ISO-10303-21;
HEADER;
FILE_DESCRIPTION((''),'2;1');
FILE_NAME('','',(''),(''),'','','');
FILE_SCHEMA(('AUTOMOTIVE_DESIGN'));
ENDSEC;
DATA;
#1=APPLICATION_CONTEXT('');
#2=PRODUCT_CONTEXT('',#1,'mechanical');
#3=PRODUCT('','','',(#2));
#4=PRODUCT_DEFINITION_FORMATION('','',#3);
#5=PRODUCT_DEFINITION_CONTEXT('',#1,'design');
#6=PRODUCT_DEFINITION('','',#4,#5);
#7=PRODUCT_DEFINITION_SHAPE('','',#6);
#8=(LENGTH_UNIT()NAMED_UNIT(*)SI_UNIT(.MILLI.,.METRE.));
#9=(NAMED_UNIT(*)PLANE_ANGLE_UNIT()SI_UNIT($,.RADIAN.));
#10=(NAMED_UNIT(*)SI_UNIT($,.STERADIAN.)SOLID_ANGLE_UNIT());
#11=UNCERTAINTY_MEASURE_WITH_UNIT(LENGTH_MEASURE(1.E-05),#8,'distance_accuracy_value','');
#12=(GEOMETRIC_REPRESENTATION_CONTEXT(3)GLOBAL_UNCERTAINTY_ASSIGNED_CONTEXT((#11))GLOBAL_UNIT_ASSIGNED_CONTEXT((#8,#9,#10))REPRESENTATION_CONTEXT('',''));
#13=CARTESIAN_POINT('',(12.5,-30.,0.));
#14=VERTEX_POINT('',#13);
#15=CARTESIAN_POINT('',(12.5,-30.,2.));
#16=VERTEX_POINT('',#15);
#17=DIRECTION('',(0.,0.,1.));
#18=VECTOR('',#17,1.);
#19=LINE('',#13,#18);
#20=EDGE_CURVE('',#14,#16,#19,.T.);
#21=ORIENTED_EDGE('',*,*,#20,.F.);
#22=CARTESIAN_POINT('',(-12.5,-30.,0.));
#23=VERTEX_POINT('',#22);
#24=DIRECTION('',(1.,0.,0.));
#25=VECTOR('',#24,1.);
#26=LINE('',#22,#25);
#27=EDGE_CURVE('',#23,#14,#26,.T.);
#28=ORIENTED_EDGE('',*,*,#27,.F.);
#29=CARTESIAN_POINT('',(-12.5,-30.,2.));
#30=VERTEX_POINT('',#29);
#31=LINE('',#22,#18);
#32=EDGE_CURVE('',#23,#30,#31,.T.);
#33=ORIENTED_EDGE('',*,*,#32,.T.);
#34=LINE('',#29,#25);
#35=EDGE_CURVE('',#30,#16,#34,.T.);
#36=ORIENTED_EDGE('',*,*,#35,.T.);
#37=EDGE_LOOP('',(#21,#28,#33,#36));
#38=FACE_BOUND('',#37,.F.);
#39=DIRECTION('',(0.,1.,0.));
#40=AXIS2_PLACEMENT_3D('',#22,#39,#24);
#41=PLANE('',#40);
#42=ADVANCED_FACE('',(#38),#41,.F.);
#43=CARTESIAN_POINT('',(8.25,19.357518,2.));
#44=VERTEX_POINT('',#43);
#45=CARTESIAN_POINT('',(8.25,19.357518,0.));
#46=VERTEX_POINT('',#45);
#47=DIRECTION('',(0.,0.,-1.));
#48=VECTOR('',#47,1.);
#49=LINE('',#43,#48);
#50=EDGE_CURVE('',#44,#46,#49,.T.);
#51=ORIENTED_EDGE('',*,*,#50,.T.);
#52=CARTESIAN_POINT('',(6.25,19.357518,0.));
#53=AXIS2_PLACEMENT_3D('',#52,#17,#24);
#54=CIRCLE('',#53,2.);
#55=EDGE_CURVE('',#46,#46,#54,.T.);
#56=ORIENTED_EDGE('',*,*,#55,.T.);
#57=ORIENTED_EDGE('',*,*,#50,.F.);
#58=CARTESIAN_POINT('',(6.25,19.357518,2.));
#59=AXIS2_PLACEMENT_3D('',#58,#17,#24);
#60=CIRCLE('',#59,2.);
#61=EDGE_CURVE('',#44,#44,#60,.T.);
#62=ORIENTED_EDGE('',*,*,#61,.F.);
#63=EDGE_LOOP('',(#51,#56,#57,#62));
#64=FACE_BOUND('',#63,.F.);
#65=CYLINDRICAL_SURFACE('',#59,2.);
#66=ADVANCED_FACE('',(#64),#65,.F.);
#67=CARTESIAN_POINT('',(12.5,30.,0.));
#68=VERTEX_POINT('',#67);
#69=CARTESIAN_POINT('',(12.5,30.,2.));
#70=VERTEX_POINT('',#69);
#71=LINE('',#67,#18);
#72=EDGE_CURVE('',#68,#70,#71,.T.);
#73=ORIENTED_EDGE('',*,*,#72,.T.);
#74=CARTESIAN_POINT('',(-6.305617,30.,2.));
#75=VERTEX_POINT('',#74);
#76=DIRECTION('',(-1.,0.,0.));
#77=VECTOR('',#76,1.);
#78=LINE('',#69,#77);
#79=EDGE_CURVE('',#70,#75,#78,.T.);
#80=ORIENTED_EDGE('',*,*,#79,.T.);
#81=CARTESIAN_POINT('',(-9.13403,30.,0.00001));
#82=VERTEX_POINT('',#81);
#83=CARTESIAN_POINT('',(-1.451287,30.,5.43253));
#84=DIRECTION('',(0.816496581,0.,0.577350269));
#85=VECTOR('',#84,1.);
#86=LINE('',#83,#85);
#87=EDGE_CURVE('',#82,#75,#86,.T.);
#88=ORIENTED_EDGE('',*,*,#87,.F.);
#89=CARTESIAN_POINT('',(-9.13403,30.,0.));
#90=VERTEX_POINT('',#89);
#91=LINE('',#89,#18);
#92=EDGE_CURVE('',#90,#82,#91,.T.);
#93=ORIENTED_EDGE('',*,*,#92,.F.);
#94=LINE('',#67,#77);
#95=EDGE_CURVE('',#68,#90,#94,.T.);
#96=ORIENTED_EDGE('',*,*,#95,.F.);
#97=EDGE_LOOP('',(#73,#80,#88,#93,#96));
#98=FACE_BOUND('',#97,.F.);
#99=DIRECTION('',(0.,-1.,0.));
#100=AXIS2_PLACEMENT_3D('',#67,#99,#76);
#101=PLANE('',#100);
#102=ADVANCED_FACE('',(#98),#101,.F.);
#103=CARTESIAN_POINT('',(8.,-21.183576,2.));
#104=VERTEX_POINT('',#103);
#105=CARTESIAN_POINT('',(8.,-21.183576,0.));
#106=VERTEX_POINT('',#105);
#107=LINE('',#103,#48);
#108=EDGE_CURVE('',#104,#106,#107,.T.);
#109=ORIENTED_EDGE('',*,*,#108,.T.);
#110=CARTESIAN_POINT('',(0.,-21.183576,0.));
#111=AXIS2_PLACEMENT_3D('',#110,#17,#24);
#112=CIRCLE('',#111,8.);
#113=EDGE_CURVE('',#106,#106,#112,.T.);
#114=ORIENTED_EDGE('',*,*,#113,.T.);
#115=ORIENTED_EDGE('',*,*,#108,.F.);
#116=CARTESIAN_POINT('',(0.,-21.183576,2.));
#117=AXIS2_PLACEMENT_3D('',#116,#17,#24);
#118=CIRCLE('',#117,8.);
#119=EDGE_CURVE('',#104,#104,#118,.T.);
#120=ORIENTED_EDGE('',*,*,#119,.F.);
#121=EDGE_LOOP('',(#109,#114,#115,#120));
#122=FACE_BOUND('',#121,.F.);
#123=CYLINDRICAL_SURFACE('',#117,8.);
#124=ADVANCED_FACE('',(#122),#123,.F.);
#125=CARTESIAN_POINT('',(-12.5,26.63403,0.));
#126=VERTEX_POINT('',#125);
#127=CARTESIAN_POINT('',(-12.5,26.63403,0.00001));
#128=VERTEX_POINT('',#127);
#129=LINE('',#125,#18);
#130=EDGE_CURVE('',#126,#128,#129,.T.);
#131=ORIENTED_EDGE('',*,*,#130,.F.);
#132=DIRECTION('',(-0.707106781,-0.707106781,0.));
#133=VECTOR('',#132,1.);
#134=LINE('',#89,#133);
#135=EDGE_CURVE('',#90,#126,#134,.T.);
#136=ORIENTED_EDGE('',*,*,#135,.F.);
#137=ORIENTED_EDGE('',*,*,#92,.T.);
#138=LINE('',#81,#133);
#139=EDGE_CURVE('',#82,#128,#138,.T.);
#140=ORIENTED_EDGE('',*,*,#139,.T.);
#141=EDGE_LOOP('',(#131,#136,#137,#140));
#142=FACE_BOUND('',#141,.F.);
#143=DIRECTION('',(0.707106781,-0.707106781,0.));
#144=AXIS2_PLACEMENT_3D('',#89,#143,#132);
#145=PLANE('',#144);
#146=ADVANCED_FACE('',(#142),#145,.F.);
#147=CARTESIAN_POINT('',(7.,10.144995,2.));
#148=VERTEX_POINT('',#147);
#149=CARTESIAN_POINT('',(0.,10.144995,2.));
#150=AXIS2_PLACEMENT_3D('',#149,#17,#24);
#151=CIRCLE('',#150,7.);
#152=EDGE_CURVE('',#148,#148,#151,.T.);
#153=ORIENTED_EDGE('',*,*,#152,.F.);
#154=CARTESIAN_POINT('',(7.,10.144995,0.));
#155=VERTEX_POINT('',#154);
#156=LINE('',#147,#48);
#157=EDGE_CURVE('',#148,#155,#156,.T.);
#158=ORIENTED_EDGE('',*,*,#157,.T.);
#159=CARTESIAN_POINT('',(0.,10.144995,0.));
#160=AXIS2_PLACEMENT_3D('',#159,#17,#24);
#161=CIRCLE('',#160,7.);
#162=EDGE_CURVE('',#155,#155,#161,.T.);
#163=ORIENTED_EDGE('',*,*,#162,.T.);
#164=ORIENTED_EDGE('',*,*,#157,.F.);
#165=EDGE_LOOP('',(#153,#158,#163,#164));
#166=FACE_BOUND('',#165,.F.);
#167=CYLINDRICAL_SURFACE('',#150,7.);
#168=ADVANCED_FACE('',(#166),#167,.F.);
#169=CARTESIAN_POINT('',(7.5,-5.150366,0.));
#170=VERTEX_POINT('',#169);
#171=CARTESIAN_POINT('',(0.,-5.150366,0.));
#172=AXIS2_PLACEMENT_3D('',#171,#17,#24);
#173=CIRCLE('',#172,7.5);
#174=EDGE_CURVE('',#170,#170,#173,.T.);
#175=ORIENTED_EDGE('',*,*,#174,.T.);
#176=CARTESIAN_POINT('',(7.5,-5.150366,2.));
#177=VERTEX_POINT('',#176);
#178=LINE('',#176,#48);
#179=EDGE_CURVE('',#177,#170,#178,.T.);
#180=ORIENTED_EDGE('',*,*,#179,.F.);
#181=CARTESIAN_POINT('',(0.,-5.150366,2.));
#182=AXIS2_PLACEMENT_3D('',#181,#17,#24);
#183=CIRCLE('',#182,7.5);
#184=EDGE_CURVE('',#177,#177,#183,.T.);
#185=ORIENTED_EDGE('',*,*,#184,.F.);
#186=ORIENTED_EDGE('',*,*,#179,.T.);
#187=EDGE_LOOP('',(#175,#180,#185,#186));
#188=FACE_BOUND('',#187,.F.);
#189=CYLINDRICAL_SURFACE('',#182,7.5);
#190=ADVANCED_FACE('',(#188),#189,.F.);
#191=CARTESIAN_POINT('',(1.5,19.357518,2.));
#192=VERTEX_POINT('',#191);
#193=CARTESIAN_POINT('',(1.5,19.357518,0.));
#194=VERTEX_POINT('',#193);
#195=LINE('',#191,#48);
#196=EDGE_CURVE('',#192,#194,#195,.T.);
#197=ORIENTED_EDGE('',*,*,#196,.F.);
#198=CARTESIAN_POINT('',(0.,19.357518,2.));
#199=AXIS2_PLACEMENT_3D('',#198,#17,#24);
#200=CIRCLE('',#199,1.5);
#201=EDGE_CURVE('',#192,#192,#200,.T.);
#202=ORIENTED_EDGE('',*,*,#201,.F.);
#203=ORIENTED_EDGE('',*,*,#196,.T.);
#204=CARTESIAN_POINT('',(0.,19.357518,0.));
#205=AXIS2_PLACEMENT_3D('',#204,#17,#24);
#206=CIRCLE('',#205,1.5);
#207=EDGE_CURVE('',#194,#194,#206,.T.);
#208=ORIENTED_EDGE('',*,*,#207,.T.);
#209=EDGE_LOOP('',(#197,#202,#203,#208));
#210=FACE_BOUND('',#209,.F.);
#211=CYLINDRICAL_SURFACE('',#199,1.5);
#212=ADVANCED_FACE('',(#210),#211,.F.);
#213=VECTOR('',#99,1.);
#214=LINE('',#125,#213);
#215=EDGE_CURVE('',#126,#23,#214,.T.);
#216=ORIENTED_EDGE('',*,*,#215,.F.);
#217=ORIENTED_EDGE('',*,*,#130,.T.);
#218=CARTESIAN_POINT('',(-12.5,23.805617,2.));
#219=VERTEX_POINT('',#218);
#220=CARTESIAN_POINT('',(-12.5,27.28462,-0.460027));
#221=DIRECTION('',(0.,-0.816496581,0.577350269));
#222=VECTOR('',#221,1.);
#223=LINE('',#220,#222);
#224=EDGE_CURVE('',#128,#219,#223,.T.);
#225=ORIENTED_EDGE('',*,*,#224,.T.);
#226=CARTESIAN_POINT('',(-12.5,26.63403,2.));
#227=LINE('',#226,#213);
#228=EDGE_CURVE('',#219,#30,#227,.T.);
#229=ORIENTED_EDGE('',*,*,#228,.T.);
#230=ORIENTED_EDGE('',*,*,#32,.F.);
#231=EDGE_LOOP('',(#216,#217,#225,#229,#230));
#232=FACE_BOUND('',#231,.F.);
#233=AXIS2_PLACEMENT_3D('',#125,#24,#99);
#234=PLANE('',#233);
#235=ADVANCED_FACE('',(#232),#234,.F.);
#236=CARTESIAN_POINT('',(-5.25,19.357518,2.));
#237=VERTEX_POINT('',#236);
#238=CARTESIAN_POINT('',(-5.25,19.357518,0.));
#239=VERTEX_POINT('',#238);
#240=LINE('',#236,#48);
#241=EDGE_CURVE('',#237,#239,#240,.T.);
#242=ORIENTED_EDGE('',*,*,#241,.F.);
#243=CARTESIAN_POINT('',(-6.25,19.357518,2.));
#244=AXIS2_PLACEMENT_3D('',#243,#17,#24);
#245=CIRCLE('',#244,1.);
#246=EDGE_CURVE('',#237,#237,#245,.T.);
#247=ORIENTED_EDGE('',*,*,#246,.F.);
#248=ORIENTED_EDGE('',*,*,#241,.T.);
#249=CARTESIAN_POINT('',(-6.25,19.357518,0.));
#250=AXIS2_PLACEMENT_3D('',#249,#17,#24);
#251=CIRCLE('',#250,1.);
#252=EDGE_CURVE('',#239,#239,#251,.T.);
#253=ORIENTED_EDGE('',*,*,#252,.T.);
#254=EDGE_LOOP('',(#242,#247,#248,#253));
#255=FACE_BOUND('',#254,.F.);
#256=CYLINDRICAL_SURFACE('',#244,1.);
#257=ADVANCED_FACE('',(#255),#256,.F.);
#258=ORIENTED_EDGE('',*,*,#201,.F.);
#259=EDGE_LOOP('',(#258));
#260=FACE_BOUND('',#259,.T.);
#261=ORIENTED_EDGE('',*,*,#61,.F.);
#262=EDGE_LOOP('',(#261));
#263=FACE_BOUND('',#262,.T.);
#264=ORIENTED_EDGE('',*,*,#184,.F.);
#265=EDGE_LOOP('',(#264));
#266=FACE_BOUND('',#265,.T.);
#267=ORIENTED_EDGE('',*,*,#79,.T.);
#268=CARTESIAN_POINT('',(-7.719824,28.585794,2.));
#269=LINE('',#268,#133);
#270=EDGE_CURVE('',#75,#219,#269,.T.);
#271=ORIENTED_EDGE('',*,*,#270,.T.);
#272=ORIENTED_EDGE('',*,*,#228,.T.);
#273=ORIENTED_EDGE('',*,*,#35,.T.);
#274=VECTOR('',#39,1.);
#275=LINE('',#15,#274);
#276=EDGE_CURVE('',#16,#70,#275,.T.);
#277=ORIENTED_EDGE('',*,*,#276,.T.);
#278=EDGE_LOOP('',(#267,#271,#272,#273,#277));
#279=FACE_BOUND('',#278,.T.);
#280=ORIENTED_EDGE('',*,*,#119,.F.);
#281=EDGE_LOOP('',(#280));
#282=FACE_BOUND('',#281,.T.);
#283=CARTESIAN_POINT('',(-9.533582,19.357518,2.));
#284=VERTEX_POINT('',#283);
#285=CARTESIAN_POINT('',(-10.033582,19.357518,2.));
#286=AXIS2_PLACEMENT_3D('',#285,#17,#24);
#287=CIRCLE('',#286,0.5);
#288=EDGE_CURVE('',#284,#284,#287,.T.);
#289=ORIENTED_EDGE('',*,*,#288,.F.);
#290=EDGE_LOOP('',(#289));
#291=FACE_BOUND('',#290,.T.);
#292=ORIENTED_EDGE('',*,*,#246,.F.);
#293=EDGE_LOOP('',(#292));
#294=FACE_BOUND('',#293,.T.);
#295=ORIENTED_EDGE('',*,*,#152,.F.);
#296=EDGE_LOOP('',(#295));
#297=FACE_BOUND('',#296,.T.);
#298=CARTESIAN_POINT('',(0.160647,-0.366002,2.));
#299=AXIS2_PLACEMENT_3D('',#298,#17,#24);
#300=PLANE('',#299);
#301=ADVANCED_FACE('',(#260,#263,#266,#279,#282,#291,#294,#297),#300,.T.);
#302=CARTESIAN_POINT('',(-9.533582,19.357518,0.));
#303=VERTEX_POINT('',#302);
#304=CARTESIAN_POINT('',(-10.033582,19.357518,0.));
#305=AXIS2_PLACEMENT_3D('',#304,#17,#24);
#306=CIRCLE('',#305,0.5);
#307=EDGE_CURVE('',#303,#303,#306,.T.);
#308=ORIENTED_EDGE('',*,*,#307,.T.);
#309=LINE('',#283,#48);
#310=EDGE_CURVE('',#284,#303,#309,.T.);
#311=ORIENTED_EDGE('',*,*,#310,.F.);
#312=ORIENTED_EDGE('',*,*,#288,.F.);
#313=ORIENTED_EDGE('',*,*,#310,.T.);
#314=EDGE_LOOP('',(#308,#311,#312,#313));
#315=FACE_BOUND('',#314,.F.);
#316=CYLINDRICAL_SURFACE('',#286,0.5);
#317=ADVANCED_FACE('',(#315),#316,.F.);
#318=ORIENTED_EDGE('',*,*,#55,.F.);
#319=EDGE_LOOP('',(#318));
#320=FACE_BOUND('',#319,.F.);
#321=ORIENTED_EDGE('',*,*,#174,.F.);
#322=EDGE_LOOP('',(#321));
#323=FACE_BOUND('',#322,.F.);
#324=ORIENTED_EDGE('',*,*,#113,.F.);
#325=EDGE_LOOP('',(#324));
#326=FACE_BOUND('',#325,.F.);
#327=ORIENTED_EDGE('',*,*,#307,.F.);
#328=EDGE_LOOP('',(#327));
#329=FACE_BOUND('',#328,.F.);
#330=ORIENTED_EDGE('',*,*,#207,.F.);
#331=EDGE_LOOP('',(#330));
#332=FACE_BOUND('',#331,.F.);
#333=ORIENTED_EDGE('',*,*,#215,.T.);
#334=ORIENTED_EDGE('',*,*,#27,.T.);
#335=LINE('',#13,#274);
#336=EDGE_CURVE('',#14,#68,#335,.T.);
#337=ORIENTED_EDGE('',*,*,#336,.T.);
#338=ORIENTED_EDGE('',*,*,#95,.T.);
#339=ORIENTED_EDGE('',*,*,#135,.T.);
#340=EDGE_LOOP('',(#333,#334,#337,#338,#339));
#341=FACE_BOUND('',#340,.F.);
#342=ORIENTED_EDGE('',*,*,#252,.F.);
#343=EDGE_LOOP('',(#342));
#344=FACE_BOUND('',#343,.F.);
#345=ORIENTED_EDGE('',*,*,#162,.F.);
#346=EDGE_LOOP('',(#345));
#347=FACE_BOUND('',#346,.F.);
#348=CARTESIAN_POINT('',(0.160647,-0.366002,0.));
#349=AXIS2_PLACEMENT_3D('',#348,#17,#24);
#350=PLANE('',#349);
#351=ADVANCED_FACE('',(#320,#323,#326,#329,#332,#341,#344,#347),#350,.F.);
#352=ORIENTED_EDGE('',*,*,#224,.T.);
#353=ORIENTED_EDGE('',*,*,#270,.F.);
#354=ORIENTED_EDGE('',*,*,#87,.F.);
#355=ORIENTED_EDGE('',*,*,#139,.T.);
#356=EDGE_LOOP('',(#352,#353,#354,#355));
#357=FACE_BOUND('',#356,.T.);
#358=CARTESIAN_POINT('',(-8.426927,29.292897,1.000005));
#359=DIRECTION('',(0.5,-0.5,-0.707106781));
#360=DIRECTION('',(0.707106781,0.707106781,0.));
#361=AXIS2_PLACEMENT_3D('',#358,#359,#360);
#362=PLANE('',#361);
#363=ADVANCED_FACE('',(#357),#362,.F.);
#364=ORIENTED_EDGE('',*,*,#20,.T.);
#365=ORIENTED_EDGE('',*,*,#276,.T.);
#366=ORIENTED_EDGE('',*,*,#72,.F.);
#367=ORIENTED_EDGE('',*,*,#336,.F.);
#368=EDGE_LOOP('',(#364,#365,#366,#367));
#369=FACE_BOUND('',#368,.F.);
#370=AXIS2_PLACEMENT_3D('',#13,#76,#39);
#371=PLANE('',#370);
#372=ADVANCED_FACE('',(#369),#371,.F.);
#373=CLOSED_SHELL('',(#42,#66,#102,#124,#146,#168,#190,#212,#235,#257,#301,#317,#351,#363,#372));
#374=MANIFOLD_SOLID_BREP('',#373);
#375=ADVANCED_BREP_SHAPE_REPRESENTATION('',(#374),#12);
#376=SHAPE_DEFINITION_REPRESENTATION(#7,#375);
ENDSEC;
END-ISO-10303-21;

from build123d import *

# Parameters (mm, degrees)
F1_DEPTH = 2
F2_SIZE  = 1.99999
F3_R     = 1
F3_R_2   = 0.5
F3_R_3   = 1.5
F3_R_4   = 2
F4_DEPTH = 25.4
F5_R     = 7.5
F5_R_2   = 8
F5_R_3   = 7
F6_DEPTH = 25.4


# Not quite as in the source:
# - a fillet or chamfer is up to 0.001 mm smaller than in the source, because OpenCascade refuses the exact size


with BuildPart() as f1:
    # F0 (on Top) → F1 (new body)
    with BuildSketch(Plane.XY):
        Polygon((-12.5, -30), (12.5, -30), (12.5, 30), (-9.1340300441, 30), (-12.5, 26.6340300441), align=None)
    extrude(amount=F1_DEPTH)

    # F2 (size 2 in the source; OpenCascade refuses exactly that, so slightly less here)
    f2_edges = [f1.edges().sort_by_distance(p)[0] for p in [
        (-10.817015, 28.317015, 2),
    ]]
    chamfer(f2_edges, length=F2_SIZE)

    # F3 (on face) → F4 (cut)
    with BuildSketch(Plane.XY.offset(2)):
        with Locations((-6.25, 19.3575184322)):
            Circle(F3_R)
        with Locations((-10.0335823372, 19.3575184322)):
            Circle(F3_R_2)
        with Locations((0, 19.3575184322)):
            Circle(F3_R_3)
        with Locations((6.25, 19.3575184322)):
            Circle(F3_R_4)
    extrude(amount=-F4_DEPTH, mode=Mode.SUBTRACT)

    # F5 (on face) → F6 (cut)
    with BuildSketch(Plane.XY.offset(2)):
        with Locations((0, -5.1503664152)):
            Circle(F5_R)
        with Locations((0, -21.1835757454)):
            Circle(F5_R_2)
        with Locations((0, 10.1449948387)):
            Circle(F5_R_3)
    extrude(amount=-F6_DEPTH, mode=Mode.SUBTRACT)


solid = f1.part
